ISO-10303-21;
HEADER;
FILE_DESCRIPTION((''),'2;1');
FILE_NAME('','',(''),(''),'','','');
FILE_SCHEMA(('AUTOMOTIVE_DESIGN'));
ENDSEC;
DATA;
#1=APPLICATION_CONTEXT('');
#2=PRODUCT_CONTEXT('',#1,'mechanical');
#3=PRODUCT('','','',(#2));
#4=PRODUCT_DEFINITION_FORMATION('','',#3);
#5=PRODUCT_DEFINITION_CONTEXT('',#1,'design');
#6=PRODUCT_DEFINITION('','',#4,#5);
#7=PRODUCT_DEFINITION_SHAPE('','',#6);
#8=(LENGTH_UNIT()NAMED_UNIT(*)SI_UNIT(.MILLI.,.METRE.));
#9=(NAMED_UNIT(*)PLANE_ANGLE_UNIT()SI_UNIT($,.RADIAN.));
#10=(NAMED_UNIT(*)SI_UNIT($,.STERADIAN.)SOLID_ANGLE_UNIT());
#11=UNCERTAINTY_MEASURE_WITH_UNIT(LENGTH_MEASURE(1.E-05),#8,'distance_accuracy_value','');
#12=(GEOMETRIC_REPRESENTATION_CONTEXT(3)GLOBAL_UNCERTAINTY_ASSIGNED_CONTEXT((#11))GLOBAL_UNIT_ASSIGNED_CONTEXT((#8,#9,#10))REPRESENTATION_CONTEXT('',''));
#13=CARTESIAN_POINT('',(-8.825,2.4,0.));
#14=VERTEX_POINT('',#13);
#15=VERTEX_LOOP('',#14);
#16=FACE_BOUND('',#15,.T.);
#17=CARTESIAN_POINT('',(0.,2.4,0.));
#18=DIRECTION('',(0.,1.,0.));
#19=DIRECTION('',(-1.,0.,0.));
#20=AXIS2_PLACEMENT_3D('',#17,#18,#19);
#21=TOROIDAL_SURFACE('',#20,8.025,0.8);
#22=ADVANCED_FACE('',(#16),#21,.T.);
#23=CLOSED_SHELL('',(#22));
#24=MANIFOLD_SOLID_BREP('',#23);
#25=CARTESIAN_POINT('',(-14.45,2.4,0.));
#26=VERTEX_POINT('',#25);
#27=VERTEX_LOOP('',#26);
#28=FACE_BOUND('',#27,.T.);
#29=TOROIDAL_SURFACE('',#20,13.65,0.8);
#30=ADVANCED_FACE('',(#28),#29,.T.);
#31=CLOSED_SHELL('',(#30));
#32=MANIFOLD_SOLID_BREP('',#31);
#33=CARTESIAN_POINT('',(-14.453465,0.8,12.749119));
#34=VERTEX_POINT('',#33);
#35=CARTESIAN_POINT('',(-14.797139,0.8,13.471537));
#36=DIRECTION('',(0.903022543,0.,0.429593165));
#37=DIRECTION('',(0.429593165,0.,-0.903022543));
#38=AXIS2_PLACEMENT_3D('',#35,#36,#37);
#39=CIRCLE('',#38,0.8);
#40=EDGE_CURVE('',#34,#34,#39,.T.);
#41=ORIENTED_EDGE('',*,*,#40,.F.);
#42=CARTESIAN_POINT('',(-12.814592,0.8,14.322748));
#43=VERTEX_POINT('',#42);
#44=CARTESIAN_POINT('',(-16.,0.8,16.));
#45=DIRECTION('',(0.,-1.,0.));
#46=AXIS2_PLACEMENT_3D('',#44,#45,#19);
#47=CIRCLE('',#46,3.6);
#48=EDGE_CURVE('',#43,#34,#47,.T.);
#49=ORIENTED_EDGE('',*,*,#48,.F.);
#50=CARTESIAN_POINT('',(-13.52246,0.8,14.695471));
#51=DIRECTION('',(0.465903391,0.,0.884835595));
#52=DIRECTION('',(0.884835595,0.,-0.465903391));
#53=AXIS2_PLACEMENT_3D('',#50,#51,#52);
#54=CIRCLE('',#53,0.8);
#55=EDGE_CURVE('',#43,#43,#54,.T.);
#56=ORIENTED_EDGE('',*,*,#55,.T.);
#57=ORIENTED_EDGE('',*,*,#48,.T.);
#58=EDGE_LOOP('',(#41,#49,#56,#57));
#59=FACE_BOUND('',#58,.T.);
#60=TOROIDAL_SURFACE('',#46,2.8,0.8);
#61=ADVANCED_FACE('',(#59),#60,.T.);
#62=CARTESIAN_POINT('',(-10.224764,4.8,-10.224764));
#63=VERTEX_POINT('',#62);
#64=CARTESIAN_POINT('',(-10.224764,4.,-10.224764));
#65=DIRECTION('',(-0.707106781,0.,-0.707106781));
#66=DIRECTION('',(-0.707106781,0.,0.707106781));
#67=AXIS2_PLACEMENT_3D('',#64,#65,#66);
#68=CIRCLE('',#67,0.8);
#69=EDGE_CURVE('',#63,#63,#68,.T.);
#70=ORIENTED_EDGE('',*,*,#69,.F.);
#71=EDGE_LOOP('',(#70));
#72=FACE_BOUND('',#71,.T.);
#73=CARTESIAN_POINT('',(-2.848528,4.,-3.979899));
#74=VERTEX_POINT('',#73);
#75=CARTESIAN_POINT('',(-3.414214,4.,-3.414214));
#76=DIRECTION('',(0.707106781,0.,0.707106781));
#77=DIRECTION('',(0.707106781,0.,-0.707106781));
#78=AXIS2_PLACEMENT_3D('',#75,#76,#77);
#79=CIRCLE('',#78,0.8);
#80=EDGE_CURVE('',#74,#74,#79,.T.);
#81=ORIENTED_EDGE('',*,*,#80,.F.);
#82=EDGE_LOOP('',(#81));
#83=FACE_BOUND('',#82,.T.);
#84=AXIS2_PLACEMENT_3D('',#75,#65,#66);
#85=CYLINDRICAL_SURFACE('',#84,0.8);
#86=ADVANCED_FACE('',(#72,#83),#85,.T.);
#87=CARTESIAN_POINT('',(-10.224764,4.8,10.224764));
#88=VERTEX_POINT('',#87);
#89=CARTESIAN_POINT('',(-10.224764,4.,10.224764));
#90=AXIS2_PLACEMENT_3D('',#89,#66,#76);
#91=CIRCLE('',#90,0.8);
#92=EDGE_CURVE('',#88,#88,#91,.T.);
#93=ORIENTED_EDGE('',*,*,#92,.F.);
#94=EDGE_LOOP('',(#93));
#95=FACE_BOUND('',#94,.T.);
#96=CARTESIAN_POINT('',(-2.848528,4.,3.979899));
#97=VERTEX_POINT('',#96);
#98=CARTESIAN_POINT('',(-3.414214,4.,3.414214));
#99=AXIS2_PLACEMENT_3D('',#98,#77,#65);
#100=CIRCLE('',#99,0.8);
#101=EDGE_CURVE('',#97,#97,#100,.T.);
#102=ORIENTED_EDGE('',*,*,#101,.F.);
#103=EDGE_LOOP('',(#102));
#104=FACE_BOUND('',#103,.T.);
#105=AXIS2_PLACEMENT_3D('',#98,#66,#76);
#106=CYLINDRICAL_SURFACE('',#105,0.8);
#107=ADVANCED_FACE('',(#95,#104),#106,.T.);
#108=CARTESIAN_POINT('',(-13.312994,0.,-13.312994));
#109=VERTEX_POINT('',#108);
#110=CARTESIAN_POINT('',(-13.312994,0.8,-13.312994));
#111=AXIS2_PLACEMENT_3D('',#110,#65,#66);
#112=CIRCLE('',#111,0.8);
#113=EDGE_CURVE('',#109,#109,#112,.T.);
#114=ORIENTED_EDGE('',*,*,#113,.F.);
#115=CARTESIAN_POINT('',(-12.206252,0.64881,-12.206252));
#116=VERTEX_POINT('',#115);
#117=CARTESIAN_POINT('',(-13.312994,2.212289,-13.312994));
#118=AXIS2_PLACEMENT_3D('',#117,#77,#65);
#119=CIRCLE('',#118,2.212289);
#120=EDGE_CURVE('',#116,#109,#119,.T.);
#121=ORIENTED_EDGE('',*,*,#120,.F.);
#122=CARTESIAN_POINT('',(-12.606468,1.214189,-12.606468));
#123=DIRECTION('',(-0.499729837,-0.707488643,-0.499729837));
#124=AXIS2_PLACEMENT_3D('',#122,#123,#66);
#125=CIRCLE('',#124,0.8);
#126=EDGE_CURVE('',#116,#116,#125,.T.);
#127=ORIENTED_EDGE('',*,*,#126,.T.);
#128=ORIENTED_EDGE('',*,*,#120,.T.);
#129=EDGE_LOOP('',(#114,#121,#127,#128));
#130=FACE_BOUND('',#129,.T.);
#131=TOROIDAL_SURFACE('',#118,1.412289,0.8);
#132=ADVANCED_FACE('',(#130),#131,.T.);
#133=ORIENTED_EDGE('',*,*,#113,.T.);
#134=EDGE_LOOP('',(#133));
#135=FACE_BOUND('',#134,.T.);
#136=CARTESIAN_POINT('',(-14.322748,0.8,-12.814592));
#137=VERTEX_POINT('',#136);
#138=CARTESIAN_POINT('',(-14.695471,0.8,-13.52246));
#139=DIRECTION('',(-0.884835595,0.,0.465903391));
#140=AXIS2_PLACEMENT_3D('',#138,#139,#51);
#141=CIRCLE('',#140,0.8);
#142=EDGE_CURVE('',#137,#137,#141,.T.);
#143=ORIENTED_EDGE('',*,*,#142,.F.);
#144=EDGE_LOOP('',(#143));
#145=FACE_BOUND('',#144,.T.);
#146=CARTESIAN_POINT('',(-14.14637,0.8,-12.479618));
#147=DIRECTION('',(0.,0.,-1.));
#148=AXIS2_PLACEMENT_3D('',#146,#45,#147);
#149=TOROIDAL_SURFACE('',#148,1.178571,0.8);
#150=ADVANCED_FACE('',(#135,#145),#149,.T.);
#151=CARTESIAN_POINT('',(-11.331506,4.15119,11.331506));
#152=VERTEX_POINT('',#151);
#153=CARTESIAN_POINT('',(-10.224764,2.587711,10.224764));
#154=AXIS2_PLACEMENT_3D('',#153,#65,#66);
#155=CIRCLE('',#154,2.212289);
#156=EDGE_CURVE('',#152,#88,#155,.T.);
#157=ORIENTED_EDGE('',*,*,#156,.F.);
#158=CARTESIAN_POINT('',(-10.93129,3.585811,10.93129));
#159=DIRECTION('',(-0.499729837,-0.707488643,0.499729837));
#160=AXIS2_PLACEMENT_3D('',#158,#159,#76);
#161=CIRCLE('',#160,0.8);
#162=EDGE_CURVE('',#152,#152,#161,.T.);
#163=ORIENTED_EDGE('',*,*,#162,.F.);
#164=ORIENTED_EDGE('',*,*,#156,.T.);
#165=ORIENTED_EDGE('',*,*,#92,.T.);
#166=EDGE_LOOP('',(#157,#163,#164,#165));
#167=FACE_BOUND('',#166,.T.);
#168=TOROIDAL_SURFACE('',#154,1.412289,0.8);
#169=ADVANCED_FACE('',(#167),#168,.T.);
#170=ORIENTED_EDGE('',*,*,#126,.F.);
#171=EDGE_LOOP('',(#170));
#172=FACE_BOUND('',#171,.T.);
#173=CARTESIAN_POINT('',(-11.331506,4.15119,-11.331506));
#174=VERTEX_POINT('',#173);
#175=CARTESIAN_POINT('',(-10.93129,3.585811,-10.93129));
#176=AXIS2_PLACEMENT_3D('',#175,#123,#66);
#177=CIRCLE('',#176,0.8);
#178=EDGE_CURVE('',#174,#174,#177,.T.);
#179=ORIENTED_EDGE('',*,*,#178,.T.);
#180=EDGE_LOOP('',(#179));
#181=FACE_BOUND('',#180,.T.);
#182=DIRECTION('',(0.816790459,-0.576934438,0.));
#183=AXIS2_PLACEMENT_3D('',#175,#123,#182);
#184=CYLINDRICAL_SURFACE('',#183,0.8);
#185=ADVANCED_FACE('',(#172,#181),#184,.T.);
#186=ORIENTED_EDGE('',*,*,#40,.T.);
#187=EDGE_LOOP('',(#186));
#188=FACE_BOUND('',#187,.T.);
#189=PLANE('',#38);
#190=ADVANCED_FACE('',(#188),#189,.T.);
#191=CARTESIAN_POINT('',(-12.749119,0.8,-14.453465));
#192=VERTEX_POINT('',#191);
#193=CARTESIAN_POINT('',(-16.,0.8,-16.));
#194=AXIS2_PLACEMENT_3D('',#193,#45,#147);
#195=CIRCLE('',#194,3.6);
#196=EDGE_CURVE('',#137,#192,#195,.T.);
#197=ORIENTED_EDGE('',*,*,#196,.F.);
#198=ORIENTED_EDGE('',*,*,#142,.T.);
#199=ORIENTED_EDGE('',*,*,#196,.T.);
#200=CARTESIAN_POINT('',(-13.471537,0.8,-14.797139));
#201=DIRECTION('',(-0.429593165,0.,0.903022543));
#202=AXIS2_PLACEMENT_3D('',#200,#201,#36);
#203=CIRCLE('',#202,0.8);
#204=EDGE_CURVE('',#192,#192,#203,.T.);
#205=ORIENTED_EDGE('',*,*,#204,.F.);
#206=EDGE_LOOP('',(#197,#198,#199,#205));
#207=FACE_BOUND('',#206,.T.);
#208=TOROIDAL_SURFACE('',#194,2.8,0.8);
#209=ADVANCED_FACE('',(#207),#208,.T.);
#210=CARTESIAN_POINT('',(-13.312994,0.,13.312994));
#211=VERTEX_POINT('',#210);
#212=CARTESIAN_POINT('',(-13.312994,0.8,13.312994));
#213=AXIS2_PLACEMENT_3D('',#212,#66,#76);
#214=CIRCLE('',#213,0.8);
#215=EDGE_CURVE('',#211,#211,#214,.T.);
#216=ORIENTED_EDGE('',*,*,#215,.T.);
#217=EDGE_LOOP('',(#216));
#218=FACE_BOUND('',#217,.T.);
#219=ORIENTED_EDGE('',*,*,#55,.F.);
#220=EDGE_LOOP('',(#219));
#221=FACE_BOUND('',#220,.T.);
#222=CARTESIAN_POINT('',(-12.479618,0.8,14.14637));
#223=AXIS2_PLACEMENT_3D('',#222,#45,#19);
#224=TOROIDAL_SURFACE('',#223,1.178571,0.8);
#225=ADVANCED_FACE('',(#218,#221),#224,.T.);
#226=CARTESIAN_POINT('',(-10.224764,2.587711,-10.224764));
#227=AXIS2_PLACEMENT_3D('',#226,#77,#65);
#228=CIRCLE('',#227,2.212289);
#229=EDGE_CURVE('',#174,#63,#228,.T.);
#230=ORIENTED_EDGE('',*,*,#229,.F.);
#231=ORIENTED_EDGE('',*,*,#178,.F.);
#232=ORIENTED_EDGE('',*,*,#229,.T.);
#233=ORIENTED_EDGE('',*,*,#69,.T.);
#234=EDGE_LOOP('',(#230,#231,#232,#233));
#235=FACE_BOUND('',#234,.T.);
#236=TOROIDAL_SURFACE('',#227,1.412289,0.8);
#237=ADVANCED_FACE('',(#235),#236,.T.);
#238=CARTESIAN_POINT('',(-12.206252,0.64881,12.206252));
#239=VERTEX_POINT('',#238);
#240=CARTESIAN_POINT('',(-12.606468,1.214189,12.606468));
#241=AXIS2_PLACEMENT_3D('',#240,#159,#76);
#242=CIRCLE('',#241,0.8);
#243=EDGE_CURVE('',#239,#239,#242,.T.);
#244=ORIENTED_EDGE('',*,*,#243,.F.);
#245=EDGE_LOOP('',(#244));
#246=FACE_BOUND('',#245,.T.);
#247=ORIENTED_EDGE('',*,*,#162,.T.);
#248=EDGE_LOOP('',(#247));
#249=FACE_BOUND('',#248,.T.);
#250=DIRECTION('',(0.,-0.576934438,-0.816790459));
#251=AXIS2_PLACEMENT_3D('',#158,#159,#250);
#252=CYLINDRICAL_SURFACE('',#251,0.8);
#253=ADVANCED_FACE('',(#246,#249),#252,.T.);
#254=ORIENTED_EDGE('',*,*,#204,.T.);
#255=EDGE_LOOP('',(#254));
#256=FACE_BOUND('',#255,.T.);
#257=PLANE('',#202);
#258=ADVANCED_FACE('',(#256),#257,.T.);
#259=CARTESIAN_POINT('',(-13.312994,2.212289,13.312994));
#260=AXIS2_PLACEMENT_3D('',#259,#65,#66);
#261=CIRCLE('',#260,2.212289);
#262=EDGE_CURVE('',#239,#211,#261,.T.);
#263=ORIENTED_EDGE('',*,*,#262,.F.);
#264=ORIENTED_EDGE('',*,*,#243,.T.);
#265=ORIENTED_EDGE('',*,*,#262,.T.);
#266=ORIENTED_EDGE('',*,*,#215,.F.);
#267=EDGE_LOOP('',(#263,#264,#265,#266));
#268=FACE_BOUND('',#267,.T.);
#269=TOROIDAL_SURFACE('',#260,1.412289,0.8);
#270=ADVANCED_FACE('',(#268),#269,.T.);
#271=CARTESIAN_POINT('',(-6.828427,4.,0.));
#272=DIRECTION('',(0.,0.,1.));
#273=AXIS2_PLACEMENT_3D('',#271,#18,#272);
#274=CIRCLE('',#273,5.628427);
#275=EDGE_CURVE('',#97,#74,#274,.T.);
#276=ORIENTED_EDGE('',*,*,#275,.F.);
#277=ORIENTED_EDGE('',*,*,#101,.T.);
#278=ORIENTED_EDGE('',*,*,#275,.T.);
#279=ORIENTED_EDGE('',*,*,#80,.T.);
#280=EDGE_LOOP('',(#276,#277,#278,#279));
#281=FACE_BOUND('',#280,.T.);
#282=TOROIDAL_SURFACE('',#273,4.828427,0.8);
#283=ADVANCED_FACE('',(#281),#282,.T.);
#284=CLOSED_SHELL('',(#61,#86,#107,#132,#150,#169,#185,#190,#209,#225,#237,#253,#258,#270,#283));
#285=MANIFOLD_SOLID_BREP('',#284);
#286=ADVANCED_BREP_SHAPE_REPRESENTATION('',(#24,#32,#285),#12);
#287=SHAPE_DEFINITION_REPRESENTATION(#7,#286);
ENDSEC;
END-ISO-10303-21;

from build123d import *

# Parameters (mm, degrees)
SKETCH1_R               = 0.8
SKETCH3_R               = 0.8
SKETCH5_R               = 0.8
SKETCH7_R               = 0.8
CUT_EXTRUDE1_DEPTH      = 29.131121712
CUT_EXTRUDE1_DEPTH_BACK = 29.131121712
CIRPATTERN1_COUNT       = 2
CIRPATTERN1_ANGLE       = 90
SKETCH10_R              = 0.8


with BuildPart() as part:
    # Sketch1 → Revolve1 (revolve)
    with BuildSketch(Plane.XY):
        with Locations((-8.025, 2.4)):
            Circle(SKETCH1_R)
        with Locations((-13.65, 2.4)):
            Circle(SKETCH1_R)
    revolve(axis=Axis((0, 2.4, 0), (0, -1, 0)))


with BuildPart() as body_2:
    # Sweep1: sweep along a path in Sketch2
    with BuildLine(Plane(origin=(0, 0, 0), x_dir=(1, 0, 0), z_dir=(0, 1, 0))) as sweep1_path:
        Line((-10.224764056, 10.224764056), (-3.414213562, 3.414213562))
        ThreePointArc((-3.414213562, 3.414213562), (-2.36754213, 1.847759065), (-2, 0))
    # Sketch3 → Sweep1 (sweep)
    with BuildSketch(Plane.XY):
        with Locations((-2, 4)):
            Circle(SKETCH3_R)
    sweep(path=sweep1_path.line)

    # Sweep2: sweep along a path in Sketch4
    with BuildLine(Plane(origin=(0, 0, 0), x_dir=(-0.7071067811865488, 0, -0.7071067811865464), z_dir=(0.7071067811865464, -1.0221956111222453e-15, -0.7071067811865488))) as sweep2_path:
        ThreePointArc((14.46, 4), (15.000811939, 3.892349891), (15.459178331, 3.585810578))
        Line((15.459178331, 3.585810578), (17.828238666, 1.214189422))
        ThreePointArc((17.828238666, 1.214189422), (18.286605059, 0.907650109), (18.827416998, 0.8))
    # Sketch5 → Sweep2 (sweep)
    with BuildSketch(Plane(origin=(-10.224764056, 0, -10.224764056), x_dir=(-0.7071067811865516, 0, 0.7071067811865435), z_dir=(-0.7071067811865435, 0, -0.7071067811865516))):
        with Locations((0, 4)):
            Circle(SKETCH5_R)
    sweep(path=sweep2_path.line)

    # Sweep3: sweep along a path in Sketch6
    with BuildLine(Plane(origin=(0, 0, 0), x_dir=(1, 0, 0), z_dir=(0, 1, 0))) as sweep3_path:
        ThreePointArc((-13.312994231, 13.312994231), (-13.969813741, 13.644890227), (-14.695470506, 13.522460334))
        ThreePointArc((-14.695470506, 13.522460334), (-18.019692949, 17.93928863), (-13.47153688, 14.797139139))
    # Sketch7 → Sweep3 (sweep)
    with BuildSketch(Plane(origin=(-13.312994231, 0, -13.312994231), x_dir=(-0.7071067811865515, 2.0261570199408882e-15, 0.7071067811865437), z_dir=(-0.7071067811865437, -2.0261570199409115e-15, -0.7071067811865515))):
        with Locations((0, 0.8)):
            Circle(SKETCH7_R)
    sweep(path=sweep3_path.line)

    # Sketch8 → Cut-Extrude1 (cut, two sides: drawn at the far end of the back side and taken through both)
    with BuildSketch(Plane(origin=(0, 0, 0), x_dir=(1, 0, 0), z_dir=(0, 1, 0)).offset(-CUT_EXTRUDE1_DEPTH_BACK)):
        Polygon((-46.797302543, -39.968875418), (-3.979898987, 2.848528137), (-2.848528137, 3.979898987), (39.968875418, 46.797302543), (125.603682529, -38.837504568), (38.837504568, -125.603682529), align=None)
    extrude(amount=CUT_EXTRUDE1_DEPTH + CUT_EXTRUDE1_DEPTH_BACK, mode=Mode.SUBTRACT)


with BuildPart() as cirpattern1_1:
    # CirPattern1: pattern copy
    add(body_2.part.rotate(Axis((0, 0, 0), (0, 1, 0)), 1 * CIRPATTERN1_ANGLE / (CIRPATTERN1_COUNT - 1)))


with BuildPart() as body_2_1:
    add(body_2.part)

    add(cirpattern1_1.part)  # Sweep4 merges CirPattern1_1
    # Sweep4: sweep along a path in Sketch9
    with BuildLine(Plane(origin=(0, 0, 0), x_dir=(1, 0, 0), z_dir=(0, 1, 0))) as sweep4_path:
        ThreePointArc((-3.414213562, 3.414213562), (-2, 0), (-3.414213562, -3.414213562))
    # Sketch10 → Sweep4 (sweep)
    with BuildSketch(Plane(origin=(-3.414213562, 0, -3.414213562), x_dir=(0.7071067811865474, 0, -0.7071067811865477), z_dir=(0.7071067811865477, 0, 0.7071067811865474))):
        with Locations((0, 4)):
            Circle(SKETCH10_R)
    sweep(path=sweep4_path.line)


solid = Compound([part.part, body_2_1.part])
